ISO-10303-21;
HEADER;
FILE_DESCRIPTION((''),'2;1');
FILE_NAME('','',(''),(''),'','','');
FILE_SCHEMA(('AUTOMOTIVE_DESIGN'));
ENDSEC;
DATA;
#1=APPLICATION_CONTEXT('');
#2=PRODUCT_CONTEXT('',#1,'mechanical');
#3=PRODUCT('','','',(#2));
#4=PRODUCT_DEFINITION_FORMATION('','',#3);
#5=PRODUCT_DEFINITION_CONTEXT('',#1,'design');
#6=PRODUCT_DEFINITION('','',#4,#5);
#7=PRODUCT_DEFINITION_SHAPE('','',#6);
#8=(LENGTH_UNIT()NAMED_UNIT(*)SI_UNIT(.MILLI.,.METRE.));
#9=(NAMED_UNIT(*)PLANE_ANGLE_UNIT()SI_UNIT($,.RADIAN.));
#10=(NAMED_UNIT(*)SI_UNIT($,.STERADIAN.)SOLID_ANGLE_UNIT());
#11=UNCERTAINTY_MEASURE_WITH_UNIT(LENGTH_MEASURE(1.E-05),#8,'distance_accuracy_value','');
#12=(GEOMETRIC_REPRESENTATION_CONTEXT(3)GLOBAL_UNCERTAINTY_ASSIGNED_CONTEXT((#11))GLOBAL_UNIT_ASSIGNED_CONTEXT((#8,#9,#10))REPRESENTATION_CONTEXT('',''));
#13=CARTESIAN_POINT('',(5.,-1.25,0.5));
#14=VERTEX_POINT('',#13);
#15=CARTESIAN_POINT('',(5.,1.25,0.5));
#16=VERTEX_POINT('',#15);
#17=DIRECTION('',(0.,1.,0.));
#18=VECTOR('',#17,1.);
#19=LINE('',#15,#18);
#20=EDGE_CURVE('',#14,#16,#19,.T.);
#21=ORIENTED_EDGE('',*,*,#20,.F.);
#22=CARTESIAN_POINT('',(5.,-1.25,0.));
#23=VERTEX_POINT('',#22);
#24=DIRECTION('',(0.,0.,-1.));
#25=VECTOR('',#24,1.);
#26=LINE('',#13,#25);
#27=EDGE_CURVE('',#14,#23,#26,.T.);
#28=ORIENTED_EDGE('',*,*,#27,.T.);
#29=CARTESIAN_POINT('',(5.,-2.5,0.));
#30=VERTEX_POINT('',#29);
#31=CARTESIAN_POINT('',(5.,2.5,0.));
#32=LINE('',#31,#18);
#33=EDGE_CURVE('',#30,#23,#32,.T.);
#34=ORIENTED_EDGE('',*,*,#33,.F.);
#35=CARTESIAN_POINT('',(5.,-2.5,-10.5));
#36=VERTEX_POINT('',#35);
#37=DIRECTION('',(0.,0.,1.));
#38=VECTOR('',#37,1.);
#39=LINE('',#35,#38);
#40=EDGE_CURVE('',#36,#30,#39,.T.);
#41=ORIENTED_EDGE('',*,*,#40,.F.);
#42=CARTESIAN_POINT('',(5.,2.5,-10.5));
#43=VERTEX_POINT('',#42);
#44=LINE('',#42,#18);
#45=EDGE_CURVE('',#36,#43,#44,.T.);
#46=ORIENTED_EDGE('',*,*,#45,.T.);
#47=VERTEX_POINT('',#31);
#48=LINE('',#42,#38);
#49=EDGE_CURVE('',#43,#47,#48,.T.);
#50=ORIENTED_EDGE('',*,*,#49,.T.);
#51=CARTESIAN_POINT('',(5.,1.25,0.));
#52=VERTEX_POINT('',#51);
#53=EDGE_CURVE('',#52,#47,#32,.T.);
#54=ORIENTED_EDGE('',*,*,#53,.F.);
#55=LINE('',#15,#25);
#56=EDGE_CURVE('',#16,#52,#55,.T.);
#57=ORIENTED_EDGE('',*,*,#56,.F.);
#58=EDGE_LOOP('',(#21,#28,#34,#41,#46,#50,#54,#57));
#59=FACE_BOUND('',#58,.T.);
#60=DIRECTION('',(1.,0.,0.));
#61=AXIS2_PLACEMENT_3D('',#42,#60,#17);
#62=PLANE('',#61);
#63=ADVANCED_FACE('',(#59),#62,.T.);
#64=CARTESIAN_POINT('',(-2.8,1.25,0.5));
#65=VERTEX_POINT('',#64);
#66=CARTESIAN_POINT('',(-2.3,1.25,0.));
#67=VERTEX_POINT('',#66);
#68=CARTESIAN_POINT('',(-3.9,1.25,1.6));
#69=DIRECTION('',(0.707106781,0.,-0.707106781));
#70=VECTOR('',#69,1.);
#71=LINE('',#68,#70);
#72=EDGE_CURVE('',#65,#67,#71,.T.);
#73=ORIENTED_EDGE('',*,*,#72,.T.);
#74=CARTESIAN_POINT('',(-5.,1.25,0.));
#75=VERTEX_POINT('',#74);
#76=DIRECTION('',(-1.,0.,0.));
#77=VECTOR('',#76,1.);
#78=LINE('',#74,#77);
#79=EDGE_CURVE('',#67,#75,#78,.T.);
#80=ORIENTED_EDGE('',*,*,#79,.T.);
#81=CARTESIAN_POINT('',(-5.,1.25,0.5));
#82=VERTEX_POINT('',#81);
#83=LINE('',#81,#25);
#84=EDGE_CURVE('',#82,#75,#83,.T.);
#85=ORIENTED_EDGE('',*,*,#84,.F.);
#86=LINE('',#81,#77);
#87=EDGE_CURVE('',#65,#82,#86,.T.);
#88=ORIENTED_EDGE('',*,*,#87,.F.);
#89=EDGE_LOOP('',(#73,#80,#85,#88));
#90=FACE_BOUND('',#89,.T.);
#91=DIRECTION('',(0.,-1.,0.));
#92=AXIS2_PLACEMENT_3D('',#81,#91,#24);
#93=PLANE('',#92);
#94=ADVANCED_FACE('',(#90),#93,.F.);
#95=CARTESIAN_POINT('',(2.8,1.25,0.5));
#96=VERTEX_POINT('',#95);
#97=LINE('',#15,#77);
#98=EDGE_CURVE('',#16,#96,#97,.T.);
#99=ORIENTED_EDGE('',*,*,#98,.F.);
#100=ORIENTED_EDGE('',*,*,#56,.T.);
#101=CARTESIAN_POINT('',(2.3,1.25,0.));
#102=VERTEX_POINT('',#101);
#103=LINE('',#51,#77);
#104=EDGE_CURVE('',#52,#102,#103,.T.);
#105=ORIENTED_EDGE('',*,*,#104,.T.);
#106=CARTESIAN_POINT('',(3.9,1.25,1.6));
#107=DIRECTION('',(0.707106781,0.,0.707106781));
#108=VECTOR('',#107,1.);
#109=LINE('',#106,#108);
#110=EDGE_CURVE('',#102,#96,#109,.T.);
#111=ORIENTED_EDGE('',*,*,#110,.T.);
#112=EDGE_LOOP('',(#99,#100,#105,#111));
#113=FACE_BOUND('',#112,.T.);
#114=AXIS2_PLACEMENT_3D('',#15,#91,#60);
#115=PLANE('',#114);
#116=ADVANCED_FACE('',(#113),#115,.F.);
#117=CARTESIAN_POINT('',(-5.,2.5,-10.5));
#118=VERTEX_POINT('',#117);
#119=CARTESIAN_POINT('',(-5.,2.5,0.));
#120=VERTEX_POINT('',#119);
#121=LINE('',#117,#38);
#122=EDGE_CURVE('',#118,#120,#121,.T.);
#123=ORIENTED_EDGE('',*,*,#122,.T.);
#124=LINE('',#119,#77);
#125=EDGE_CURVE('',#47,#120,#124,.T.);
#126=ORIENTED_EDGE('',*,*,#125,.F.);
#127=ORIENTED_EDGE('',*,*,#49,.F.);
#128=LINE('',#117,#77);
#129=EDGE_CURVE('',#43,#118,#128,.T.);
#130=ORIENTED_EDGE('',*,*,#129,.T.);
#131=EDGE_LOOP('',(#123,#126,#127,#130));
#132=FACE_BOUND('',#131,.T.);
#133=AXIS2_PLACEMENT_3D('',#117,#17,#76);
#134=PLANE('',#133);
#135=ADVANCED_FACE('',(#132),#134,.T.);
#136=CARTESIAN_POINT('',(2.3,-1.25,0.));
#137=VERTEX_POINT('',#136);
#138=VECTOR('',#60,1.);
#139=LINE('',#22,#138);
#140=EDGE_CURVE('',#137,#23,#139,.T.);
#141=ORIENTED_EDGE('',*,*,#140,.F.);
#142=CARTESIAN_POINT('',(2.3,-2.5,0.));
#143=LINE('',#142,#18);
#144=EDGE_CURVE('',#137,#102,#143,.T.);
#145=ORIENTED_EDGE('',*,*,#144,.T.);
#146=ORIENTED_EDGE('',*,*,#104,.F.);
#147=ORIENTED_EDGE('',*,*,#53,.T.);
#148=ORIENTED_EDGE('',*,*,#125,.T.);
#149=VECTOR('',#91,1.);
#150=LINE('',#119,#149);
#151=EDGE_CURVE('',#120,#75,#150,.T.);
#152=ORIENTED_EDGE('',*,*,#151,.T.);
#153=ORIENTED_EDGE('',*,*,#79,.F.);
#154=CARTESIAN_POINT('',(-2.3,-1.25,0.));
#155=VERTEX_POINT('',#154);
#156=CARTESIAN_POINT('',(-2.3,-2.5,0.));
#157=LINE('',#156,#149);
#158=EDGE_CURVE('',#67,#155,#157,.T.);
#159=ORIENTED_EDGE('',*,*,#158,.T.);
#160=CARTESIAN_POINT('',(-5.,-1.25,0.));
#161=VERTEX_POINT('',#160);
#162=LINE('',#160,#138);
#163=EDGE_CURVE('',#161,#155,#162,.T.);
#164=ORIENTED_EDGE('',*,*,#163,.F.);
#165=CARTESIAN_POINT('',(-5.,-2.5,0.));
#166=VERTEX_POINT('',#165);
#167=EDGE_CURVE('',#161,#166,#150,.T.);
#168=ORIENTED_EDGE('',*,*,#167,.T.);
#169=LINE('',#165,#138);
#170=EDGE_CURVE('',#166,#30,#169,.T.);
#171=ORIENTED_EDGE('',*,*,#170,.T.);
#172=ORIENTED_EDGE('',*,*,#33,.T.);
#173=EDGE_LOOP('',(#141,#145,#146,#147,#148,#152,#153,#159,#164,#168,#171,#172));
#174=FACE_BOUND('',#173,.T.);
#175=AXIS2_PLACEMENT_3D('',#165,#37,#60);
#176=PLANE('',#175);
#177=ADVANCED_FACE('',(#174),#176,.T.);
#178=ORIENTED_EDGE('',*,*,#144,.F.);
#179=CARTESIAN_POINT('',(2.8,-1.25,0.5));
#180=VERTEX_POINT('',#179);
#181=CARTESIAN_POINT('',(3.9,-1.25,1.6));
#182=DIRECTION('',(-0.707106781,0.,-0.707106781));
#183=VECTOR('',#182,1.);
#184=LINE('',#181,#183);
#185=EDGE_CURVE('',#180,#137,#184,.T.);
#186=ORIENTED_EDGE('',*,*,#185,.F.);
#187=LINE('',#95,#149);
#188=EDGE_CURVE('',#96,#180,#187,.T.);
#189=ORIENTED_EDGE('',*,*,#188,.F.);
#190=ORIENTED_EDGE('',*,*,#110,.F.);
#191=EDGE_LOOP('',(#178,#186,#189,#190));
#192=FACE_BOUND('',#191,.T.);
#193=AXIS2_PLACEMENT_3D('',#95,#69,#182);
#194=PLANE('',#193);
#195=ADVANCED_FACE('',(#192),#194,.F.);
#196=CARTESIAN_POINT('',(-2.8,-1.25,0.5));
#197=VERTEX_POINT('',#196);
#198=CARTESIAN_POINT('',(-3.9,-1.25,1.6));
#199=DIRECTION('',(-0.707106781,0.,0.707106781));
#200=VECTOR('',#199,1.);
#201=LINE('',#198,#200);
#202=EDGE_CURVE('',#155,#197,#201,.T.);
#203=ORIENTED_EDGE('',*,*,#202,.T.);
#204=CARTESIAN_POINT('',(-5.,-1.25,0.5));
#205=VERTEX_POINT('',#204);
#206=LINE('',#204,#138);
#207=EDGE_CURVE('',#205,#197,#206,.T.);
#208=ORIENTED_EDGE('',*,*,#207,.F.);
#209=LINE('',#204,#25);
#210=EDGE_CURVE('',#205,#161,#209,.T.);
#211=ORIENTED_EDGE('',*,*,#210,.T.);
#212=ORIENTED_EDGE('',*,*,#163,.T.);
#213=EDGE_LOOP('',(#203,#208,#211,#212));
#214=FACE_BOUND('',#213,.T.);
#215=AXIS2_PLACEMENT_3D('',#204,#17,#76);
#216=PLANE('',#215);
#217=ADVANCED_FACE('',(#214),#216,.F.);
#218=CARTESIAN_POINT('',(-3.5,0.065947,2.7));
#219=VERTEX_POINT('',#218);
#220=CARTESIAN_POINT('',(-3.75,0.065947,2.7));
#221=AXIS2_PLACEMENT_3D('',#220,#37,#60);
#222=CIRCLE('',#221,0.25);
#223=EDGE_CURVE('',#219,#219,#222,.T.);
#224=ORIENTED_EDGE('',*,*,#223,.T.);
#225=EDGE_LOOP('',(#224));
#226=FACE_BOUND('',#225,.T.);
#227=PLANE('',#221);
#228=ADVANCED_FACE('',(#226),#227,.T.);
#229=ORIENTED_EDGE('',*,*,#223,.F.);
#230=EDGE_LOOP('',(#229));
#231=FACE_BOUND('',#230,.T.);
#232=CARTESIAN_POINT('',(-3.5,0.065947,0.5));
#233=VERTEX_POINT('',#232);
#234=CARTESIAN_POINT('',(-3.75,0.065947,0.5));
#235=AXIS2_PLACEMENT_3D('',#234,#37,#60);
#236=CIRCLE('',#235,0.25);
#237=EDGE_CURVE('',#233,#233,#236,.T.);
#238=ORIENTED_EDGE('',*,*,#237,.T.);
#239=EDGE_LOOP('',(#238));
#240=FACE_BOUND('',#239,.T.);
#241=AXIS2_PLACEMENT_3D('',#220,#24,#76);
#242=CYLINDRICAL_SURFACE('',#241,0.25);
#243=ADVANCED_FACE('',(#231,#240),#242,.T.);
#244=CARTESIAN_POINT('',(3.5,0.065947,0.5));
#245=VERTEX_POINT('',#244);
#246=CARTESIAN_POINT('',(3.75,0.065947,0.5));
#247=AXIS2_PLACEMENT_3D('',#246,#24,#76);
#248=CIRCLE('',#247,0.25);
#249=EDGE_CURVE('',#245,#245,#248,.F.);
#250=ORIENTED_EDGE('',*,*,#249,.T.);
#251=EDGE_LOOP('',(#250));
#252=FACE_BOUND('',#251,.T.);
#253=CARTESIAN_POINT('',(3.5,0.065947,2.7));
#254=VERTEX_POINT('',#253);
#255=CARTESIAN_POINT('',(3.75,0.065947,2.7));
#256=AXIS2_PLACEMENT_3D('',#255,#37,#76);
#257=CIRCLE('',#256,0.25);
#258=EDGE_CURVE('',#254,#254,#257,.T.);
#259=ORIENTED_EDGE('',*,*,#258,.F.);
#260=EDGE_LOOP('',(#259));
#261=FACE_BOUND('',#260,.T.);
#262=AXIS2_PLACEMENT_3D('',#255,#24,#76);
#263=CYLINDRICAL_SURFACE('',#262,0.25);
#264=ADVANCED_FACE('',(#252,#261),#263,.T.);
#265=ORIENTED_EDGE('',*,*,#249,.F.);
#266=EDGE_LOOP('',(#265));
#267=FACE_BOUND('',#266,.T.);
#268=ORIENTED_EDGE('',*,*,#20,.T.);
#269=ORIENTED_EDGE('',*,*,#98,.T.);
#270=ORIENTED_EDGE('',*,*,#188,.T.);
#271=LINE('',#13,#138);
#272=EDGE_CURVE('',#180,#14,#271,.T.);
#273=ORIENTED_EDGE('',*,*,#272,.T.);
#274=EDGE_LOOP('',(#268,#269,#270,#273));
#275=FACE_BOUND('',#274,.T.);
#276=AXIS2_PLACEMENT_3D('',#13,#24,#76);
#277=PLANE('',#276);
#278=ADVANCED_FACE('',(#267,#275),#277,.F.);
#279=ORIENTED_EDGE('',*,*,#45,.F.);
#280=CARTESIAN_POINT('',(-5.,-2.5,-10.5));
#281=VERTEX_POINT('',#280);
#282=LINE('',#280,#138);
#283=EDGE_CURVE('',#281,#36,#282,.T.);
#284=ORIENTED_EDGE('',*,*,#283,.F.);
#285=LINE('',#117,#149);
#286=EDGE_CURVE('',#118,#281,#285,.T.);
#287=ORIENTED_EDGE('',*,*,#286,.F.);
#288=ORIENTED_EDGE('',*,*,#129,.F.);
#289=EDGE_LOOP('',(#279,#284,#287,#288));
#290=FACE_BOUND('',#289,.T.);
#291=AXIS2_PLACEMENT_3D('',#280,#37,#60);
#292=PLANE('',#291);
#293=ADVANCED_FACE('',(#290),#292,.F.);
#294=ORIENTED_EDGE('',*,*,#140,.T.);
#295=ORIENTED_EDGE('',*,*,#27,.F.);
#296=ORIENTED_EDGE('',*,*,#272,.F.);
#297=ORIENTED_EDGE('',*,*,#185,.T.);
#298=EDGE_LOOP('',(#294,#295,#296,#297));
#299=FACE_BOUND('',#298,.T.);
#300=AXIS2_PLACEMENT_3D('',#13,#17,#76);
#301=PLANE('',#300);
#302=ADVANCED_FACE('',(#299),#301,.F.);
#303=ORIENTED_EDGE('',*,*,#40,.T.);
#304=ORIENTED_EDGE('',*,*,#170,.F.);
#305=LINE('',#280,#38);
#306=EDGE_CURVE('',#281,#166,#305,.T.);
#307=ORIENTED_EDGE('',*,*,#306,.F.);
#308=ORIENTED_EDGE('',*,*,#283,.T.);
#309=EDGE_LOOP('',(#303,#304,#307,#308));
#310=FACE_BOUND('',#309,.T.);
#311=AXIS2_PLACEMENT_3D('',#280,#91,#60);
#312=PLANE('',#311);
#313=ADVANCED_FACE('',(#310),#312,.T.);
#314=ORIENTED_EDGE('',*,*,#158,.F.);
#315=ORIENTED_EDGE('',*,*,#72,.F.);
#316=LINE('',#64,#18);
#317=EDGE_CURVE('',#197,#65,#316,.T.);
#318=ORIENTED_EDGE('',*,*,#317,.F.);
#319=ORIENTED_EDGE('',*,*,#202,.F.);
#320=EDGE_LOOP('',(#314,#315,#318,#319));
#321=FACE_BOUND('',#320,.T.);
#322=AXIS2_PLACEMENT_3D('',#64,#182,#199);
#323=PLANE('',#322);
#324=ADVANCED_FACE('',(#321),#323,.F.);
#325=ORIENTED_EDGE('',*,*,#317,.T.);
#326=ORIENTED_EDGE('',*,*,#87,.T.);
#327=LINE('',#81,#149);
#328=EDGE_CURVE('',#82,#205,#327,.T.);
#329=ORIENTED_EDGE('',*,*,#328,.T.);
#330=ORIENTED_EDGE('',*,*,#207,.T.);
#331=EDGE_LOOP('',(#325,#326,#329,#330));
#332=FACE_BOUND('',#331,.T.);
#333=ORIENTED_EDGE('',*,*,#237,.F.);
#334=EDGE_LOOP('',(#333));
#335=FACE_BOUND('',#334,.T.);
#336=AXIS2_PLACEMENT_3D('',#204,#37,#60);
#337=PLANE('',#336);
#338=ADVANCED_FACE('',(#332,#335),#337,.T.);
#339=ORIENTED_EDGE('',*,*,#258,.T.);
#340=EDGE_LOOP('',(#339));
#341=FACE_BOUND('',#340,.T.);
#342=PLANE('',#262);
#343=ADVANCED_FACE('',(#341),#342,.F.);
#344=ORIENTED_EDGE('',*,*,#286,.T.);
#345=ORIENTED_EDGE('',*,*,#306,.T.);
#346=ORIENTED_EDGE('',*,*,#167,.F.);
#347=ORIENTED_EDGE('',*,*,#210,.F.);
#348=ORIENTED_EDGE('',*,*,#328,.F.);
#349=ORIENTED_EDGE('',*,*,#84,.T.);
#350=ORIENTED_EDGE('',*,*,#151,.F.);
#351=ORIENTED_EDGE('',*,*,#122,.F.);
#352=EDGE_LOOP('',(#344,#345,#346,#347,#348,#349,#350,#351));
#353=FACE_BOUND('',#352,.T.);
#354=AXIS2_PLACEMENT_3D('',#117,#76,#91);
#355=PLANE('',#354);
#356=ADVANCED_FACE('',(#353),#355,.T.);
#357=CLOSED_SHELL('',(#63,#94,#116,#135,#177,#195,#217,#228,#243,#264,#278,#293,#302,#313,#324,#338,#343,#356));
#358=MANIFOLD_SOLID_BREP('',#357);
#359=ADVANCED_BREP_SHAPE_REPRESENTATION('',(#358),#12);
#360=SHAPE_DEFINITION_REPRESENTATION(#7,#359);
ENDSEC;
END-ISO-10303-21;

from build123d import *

# Parameters (mm, degrees)
SKETCH1_W           = 10
SKETCH1_H           = 5
BOSS_EXTRUDE1_DEPTH = 10.5
SKETCH2_W           = 2.2
SKETCH2_H           = 2.5
BOSS_EXTRUDE2_DEPTH = 0.5
CHAMFER1_SIZE       = 0.5
SKETCH4_R           = 0.25
BOSS_EXTRUDE3_DEPTH = 2.2


with BuildPart() as part:
    # Sketch1 → Boss-Extrude1 (new body)
    with BuildSketch(Plane.XY):
        Rectangle(SKETCH1_W, SKETCH1_H)
    extrude(amount=-BOSS_EXTRUDE1_DEPTH)

    # Sketch2 → Boss-Extrude2 (add)
    with BuildSketch(Plane.XY):
        with Locations((-3.9, 0)):
            Rectangle(SKETCH2_W, SKETCH2_H)
        with Locations((3.9, 0)):
            Rectangle(SKETCH2_W, SKETCH2_H)
    extrude(amount=BOSS_EXTRUDE2_DEPTH)

    # Chamfer1
    chamfer1_edges = [part.edges().sort_by_distance(p)[0] for p in [
        (2.8, 0, 0),
        (-2.8, 0, 0),
    ]]
    chamfer(chamfer1_edges, length=CHAMFER1_SIZE - 0.0001)  # a hair under: the kernel refuses the full size

    # Sketch4 → Boss-Extrude3 (add)
    with BuildSketch(Plane.XY.offset(0.5)):
        with Locations((-3.75, 0.065947188)):
            Circle(SKETCH4_R)
        with Locations(Location((3.75, 0.065947188, 0), (0, 0, 180))):
            Circle(SKETCH4_R)
    extrude(amount=BOSS_EXTRUDE3_DEPTH)


solid = part.part
